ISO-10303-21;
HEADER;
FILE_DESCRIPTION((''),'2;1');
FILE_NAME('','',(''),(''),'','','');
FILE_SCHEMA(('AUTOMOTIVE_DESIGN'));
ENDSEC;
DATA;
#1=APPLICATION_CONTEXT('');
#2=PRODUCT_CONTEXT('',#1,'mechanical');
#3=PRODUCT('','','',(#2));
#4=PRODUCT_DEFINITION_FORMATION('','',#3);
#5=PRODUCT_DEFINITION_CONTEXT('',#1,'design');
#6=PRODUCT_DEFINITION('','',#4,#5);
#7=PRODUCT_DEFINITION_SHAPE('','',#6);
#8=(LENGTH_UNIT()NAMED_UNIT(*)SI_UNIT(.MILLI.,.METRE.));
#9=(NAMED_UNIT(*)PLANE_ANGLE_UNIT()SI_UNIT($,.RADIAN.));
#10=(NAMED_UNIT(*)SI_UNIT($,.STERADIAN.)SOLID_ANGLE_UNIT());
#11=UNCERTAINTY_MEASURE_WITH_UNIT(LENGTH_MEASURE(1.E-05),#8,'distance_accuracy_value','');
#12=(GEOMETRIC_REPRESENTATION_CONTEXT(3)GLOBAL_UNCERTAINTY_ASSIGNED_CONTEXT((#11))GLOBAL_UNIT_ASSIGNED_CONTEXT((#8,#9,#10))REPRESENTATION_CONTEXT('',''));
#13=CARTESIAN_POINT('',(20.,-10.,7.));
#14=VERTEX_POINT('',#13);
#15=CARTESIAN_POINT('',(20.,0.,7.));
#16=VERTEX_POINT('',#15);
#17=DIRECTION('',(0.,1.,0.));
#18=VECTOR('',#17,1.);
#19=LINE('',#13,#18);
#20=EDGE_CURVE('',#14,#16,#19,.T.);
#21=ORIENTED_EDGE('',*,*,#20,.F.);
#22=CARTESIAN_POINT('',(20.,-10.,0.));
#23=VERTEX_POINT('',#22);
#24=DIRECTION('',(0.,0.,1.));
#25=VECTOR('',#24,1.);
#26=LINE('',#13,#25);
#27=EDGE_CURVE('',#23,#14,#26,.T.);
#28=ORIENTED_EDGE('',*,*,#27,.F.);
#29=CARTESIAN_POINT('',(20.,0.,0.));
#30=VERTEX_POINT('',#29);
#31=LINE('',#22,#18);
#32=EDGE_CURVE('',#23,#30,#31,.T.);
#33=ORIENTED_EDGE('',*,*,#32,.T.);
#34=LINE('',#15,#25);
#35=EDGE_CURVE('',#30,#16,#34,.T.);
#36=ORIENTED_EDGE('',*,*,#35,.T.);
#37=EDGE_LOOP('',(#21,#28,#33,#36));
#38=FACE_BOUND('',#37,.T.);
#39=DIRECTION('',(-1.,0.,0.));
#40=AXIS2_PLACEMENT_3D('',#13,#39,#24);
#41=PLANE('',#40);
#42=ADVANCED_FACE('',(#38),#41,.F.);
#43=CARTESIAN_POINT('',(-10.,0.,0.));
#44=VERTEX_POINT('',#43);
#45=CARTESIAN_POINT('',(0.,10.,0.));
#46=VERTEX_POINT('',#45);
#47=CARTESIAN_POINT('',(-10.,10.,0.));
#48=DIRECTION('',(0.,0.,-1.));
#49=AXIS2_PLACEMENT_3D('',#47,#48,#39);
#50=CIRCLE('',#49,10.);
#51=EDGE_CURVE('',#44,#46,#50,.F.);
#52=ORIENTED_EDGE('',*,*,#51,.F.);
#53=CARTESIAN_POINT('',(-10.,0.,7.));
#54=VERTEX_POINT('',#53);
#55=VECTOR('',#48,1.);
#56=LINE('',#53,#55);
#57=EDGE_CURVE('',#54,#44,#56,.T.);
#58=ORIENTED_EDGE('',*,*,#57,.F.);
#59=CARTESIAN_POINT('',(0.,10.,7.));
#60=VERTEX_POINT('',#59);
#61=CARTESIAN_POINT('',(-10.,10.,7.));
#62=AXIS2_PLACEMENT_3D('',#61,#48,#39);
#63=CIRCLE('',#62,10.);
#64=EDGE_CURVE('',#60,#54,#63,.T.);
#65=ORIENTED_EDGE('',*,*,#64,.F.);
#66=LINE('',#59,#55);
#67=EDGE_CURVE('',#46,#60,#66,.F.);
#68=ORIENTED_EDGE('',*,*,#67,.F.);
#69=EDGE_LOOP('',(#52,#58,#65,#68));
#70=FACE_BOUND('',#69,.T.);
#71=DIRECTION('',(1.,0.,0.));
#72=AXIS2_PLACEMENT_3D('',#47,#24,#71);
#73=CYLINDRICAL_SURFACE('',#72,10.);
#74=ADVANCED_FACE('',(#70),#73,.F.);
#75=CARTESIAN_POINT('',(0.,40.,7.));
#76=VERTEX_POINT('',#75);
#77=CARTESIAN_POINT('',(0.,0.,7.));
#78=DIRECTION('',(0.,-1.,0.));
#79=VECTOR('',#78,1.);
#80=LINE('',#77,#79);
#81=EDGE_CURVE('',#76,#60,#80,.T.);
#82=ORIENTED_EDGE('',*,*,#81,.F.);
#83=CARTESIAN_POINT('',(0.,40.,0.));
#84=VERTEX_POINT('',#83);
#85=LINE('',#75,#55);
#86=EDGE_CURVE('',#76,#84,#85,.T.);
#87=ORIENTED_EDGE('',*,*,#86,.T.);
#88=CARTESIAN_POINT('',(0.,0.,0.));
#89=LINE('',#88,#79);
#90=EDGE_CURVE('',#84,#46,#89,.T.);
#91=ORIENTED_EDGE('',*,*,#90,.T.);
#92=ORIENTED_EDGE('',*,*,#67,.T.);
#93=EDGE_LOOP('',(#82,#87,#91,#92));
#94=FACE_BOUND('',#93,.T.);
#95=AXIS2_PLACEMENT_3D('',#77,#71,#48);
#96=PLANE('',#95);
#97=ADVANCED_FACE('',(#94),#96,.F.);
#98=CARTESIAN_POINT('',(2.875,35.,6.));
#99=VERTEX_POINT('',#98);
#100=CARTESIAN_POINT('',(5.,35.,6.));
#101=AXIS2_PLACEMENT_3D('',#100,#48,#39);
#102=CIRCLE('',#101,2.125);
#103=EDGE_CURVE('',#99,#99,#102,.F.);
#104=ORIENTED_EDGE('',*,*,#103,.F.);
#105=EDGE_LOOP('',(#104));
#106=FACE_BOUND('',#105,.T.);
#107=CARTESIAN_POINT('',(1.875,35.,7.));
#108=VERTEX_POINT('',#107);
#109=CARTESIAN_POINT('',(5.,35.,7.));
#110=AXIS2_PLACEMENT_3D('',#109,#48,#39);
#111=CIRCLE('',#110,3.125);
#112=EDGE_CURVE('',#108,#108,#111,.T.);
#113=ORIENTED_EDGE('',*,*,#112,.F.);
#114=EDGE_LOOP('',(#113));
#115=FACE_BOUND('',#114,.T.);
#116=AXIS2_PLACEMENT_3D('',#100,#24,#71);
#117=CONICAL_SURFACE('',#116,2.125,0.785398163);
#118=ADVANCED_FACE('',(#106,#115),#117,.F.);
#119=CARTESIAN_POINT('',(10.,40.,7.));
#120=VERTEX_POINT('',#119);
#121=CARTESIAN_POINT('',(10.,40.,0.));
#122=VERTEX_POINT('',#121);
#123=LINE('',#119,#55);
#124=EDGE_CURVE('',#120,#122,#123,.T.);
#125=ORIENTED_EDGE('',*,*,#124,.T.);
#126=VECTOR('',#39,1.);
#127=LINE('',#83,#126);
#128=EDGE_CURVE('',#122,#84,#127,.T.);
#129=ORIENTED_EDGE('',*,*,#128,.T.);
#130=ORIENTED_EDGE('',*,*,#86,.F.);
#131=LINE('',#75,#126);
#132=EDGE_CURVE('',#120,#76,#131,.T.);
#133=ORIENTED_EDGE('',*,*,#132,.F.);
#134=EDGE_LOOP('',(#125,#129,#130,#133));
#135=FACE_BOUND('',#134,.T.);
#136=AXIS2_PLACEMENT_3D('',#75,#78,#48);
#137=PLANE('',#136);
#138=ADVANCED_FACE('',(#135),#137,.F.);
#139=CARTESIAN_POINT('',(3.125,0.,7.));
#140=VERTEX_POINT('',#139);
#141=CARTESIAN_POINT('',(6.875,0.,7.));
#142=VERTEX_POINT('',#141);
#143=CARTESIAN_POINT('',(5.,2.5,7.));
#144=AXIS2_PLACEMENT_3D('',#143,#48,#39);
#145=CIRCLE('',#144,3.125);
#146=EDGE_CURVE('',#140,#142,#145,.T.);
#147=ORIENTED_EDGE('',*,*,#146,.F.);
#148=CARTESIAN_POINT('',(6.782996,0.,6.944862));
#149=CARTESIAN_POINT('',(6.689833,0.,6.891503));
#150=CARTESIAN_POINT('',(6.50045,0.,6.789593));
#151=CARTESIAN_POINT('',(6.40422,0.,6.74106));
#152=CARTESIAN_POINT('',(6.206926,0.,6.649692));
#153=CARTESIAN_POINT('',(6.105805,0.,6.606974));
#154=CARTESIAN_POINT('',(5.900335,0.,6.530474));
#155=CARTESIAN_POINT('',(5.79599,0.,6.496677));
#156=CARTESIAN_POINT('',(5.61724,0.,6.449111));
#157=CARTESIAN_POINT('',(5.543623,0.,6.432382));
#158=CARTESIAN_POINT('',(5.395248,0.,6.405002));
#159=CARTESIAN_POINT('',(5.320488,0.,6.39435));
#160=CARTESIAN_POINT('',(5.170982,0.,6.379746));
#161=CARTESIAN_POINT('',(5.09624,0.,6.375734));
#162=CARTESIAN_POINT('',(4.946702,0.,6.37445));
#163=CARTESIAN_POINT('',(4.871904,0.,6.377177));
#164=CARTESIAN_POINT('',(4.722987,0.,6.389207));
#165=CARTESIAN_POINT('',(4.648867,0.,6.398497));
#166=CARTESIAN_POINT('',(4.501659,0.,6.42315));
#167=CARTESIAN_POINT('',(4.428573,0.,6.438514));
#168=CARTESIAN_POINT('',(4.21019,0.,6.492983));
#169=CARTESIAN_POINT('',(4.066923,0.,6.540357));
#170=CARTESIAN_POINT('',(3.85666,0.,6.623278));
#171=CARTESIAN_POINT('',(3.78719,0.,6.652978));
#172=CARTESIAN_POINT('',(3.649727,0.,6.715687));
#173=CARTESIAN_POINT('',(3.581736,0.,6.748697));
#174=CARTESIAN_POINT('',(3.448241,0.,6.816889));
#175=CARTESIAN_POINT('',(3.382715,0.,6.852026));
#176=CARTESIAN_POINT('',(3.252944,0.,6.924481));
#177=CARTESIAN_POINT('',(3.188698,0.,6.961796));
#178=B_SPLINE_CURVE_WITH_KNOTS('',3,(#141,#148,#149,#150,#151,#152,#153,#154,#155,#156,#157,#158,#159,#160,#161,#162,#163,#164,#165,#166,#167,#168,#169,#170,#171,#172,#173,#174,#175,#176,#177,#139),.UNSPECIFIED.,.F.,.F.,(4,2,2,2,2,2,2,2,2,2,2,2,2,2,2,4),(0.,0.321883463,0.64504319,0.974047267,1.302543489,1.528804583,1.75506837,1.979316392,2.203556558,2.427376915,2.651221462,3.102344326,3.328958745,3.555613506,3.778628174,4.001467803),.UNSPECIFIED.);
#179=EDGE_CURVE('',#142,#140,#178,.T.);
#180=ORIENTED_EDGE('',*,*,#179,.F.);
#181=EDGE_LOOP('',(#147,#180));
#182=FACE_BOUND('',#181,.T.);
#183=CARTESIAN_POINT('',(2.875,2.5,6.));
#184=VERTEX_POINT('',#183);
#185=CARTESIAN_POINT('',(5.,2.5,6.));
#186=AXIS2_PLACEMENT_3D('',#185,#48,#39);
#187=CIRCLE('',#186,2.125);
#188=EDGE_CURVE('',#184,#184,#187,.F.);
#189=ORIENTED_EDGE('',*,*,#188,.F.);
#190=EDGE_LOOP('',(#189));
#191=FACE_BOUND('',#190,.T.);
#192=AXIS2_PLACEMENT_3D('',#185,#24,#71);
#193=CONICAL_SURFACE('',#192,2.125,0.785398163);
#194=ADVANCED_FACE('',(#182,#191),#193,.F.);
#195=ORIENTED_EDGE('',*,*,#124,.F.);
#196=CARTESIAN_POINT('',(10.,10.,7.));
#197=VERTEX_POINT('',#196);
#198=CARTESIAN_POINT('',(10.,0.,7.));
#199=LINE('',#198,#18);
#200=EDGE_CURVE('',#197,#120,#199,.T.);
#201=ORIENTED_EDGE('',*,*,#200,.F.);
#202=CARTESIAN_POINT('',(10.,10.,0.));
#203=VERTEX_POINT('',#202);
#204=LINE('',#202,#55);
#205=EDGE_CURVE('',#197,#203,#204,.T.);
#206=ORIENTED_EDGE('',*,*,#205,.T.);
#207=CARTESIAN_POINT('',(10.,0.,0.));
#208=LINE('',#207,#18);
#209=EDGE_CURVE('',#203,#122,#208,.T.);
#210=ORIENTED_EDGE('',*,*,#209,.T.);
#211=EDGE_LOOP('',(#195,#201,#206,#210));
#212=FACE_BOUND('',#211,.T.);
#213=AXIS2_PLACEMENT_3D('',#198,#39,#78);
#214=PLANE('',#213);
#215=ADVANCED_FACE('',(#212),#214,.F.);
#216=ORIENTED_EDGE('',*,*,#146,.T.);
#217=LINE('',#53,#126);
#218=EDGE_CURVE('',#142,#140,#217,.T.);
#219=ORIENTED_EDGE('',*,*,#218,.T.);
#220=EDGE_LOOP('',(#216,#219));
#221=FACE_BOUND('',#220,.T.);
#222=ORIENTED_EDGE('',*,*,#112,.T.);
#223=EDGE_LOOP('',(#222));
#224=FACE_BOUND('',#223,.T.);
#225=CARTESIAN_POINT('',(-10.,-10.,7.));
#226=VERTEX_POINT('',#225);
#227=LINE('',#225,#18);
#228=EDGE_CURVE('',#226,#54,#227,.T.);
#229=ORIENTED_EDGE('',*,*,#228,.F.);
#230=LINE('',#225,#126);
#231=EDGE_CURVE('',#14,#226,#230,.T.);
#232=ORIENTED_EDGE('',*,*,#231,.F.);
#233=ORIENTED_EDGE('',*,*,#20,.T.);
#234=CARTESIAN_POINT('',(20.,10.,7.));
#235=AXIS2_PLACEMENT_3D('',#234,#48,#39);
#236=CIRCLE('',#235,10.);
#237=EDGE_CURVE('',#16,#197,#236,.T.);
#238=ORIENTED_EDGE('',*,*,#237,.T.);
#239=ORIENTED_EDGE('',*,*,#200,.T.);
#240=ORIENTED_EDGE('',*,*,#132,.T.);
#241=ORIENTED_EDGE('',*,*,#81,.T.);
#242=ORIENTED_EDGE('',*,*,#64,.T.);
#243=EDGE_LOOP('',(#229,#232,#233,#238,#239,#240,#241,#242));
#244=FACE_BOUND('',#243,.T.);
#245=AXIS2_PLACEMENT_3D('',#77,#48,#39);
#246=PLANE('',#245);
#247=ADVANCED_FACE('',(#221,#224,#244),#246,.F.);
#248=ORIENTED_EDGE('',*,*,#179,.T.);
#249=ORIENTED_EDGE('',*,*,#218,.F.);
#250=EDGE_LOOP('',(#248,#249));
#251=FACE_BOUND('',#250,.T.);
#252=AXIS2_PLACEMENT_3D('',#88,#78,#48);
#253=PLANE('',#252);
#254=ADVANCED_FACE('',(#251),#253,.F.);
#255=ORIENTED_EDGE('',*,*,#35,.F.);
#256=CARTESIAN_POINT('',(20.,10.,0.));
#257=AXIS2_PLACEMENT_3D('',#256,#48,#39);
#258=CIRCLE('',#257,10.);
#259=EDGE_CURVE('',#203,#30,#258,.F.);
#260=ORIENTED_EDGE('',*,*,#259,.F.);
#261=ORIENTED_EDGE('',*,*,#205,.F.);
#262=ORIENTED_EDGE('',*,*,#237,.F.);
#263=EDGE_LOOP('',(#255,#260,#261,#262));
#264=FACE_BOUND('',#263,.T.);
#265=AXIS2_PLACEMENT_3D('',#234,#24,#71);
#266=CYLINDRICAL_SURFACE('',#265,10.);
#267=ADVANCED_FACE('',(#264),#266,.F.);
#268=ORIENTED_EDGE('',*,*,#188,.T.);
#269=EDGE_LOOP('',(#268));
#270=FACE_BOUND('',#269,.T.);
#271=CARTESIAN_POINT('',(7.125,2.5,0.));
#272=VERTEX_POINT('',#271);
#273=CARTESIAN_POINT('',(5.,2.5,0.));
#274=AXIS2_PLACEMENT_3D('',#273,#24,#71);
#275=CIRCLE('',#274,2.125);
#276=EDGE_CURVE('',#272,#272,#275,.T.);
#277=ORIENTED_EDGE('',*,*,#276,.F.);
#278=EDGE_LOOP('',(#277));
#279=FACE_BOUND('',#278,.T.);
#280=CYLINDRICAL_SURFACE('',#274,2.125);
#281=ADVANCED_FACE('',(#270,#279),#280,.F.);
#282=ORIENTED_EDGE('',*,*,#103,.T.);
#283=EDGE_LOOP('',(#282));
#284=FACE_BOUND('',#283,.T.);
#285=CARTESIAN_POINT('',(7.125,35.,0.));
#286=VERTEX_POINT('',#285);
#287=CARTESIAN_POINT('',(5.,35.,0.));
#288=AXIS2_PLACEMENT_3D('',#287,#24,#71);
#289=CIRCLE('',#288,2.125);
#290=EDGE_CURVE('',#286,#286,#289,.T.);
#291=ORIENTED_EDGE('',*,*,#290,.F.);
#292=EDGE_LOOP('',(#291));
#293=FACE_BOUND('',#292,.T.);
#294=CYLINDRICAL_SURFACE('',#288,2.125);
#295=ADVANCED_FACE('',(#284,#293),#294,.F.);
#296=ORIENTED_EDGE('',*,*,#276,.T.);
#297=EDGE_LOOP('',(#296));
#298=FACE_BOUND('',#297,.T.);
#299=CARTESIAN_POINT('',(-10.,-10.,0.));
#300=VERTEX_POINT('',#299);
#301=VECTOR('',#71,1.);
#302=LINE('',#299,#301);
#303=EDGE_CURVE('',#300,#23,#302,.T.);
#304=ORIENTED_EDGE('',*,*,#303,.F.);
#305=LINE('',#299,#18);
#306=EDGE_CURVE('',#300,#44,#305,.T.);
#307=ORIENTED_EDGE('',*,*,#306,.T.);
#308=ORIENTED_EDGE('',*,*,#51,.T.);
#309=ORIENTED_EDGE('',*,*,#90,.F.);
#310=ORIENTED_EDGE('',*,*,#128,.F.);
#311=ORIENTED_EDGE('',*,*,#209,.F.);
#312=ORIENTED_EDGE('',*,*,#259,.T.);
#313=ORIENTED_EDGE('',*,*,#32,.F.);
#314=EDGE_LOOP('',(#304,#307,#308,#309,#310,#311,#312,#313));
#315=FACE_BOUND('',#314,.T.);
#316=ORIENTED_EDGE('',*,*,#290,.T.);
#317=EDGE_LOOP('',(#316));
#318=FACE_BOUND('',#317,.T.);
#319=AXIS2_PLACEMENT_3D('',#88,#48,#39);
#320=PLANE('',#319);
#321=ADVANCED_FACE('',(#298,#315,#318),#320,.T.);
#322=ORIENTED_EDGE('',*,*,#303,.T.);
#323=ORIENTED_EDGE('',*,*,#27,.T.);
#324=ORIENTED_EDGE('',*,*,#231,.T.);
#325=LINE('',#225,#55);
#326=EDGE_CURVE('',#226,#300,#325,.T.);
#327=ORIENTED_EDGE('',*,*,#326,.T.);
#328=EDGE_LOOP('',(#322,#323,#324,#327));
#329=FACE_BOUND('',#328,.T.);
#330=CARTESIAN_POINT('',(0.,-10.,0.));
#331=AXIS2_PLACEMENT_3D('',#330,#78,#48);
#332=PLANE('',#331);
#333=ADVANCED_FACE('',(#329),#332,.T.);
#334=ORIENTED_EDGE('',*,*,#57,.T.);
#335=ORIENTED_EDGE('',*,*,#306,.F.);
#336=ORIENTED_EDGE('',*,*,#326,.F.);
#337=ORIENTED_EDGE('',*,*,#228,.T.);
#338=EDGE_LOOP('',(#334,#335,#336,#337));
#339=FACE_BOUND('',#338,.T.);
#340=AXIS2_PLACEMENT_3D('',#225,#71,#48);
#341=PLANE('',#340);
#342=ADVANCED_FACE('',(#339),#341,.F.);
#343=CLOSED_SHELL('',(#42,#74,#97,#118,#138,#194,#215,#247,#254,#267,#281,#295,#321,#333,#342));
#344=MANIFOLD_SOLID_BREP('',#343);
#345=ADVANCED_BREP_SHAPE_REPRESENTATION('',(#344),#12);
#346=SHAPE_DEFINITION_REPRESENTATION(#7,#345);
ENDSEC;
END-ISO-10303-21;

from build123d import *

# Parameters (mm, degrees)
SKETCH1_W           = 10
SKETCH1_H           = 40
BOSS_EXTRUDE1_DEPTH = 7
SKETCH2_R           = 2.125
CUT_EXTRUDE1_DEPTH  = 7
CHAMFER1_SIZE       = 1
SKETCH3_W           = 30
SKETCH3_H           = 7
BOSS_EXTRUDE2_DEPTH = 10
FILLET1_R           = 10


# Some blends are built 0.0001 mm under size
with BuildPart() as part:
    # Sketch1 → Boss-Extrude1 (new body)
    with BuildSketch(Plane.XY):
        with Locations((5, 20)):
            Rectangle(SKETCH1_W, SKETCH1_H)
    extrude(amount=BOSS_EXTRUDE1_DEPTH)

    # Sketch2 → Cut-Extrude1 (cut)
    with BuildSketch(Plane.XY.offset(7)):
        with Locations((5, 35)):
            Circle(SKETCH2_R)
        with Locations((5, 2.5)):
            Circle(SKETCH2_R)
    extrude(amount=-CUT_EXTRUDE1_DEPTH, mode=Mode.SUBTRACT)

    # Chamfer1
    # the kernel refuses this chamfer: 1 mm, written as the material it takes off along each edge
    with BuildSketch(Plane(origin=(5, 35, 7), x_dir=(1, 0, 0), z_dir=(0, -1, 0))) as chamfer1_piece_1:
        Polygon((2.125 + CHAMFER1_SIZE, 0), (2.125, -CHAMFER1_SIZE), (2.125, 0), align=None)
    revolve(axis=Axis((5, 35, 7), (0, 0, 1)), mode=Mode.SUBTRACT)
    with BuildSketch(Plane(origin=(5, 2.5, 7), x_dir=(1, 0, 0), z_dir=(0, -1, 0))) as chamfer1_piece_2:
        Polygon((2.125 + CHAMFER1_SIZE, 0), (2.125, -CHAMFER1_SIZE), (2.125, 0), align=None)
    revolve(axis=Axis((5, 2.5, 7), (0, 0, 1)), mode=Mode.SUBTRACT)

    # Sketch3 → Boss-Extrude2 (add)
    with BuildSketch(Plane.XZ):
        with Locations((5, 3.5)):
            Rectangle(SKETCH3_W, SKETCH3_H)
    extrude(amount=BOSS_EXTRUDE2_DEPTH)

    # Fillet1
    fillet1_edges = [part.edges().sort_by_distance(p)[0] for p in [
        (0, 0, 3.5),
        (10, 0, 3.5),
    ]]
    fillet(fillet1_edges, radius=FILLET1_R - 0.0001)  # a hair under: the kernel refuses the full size


solid = part.part
